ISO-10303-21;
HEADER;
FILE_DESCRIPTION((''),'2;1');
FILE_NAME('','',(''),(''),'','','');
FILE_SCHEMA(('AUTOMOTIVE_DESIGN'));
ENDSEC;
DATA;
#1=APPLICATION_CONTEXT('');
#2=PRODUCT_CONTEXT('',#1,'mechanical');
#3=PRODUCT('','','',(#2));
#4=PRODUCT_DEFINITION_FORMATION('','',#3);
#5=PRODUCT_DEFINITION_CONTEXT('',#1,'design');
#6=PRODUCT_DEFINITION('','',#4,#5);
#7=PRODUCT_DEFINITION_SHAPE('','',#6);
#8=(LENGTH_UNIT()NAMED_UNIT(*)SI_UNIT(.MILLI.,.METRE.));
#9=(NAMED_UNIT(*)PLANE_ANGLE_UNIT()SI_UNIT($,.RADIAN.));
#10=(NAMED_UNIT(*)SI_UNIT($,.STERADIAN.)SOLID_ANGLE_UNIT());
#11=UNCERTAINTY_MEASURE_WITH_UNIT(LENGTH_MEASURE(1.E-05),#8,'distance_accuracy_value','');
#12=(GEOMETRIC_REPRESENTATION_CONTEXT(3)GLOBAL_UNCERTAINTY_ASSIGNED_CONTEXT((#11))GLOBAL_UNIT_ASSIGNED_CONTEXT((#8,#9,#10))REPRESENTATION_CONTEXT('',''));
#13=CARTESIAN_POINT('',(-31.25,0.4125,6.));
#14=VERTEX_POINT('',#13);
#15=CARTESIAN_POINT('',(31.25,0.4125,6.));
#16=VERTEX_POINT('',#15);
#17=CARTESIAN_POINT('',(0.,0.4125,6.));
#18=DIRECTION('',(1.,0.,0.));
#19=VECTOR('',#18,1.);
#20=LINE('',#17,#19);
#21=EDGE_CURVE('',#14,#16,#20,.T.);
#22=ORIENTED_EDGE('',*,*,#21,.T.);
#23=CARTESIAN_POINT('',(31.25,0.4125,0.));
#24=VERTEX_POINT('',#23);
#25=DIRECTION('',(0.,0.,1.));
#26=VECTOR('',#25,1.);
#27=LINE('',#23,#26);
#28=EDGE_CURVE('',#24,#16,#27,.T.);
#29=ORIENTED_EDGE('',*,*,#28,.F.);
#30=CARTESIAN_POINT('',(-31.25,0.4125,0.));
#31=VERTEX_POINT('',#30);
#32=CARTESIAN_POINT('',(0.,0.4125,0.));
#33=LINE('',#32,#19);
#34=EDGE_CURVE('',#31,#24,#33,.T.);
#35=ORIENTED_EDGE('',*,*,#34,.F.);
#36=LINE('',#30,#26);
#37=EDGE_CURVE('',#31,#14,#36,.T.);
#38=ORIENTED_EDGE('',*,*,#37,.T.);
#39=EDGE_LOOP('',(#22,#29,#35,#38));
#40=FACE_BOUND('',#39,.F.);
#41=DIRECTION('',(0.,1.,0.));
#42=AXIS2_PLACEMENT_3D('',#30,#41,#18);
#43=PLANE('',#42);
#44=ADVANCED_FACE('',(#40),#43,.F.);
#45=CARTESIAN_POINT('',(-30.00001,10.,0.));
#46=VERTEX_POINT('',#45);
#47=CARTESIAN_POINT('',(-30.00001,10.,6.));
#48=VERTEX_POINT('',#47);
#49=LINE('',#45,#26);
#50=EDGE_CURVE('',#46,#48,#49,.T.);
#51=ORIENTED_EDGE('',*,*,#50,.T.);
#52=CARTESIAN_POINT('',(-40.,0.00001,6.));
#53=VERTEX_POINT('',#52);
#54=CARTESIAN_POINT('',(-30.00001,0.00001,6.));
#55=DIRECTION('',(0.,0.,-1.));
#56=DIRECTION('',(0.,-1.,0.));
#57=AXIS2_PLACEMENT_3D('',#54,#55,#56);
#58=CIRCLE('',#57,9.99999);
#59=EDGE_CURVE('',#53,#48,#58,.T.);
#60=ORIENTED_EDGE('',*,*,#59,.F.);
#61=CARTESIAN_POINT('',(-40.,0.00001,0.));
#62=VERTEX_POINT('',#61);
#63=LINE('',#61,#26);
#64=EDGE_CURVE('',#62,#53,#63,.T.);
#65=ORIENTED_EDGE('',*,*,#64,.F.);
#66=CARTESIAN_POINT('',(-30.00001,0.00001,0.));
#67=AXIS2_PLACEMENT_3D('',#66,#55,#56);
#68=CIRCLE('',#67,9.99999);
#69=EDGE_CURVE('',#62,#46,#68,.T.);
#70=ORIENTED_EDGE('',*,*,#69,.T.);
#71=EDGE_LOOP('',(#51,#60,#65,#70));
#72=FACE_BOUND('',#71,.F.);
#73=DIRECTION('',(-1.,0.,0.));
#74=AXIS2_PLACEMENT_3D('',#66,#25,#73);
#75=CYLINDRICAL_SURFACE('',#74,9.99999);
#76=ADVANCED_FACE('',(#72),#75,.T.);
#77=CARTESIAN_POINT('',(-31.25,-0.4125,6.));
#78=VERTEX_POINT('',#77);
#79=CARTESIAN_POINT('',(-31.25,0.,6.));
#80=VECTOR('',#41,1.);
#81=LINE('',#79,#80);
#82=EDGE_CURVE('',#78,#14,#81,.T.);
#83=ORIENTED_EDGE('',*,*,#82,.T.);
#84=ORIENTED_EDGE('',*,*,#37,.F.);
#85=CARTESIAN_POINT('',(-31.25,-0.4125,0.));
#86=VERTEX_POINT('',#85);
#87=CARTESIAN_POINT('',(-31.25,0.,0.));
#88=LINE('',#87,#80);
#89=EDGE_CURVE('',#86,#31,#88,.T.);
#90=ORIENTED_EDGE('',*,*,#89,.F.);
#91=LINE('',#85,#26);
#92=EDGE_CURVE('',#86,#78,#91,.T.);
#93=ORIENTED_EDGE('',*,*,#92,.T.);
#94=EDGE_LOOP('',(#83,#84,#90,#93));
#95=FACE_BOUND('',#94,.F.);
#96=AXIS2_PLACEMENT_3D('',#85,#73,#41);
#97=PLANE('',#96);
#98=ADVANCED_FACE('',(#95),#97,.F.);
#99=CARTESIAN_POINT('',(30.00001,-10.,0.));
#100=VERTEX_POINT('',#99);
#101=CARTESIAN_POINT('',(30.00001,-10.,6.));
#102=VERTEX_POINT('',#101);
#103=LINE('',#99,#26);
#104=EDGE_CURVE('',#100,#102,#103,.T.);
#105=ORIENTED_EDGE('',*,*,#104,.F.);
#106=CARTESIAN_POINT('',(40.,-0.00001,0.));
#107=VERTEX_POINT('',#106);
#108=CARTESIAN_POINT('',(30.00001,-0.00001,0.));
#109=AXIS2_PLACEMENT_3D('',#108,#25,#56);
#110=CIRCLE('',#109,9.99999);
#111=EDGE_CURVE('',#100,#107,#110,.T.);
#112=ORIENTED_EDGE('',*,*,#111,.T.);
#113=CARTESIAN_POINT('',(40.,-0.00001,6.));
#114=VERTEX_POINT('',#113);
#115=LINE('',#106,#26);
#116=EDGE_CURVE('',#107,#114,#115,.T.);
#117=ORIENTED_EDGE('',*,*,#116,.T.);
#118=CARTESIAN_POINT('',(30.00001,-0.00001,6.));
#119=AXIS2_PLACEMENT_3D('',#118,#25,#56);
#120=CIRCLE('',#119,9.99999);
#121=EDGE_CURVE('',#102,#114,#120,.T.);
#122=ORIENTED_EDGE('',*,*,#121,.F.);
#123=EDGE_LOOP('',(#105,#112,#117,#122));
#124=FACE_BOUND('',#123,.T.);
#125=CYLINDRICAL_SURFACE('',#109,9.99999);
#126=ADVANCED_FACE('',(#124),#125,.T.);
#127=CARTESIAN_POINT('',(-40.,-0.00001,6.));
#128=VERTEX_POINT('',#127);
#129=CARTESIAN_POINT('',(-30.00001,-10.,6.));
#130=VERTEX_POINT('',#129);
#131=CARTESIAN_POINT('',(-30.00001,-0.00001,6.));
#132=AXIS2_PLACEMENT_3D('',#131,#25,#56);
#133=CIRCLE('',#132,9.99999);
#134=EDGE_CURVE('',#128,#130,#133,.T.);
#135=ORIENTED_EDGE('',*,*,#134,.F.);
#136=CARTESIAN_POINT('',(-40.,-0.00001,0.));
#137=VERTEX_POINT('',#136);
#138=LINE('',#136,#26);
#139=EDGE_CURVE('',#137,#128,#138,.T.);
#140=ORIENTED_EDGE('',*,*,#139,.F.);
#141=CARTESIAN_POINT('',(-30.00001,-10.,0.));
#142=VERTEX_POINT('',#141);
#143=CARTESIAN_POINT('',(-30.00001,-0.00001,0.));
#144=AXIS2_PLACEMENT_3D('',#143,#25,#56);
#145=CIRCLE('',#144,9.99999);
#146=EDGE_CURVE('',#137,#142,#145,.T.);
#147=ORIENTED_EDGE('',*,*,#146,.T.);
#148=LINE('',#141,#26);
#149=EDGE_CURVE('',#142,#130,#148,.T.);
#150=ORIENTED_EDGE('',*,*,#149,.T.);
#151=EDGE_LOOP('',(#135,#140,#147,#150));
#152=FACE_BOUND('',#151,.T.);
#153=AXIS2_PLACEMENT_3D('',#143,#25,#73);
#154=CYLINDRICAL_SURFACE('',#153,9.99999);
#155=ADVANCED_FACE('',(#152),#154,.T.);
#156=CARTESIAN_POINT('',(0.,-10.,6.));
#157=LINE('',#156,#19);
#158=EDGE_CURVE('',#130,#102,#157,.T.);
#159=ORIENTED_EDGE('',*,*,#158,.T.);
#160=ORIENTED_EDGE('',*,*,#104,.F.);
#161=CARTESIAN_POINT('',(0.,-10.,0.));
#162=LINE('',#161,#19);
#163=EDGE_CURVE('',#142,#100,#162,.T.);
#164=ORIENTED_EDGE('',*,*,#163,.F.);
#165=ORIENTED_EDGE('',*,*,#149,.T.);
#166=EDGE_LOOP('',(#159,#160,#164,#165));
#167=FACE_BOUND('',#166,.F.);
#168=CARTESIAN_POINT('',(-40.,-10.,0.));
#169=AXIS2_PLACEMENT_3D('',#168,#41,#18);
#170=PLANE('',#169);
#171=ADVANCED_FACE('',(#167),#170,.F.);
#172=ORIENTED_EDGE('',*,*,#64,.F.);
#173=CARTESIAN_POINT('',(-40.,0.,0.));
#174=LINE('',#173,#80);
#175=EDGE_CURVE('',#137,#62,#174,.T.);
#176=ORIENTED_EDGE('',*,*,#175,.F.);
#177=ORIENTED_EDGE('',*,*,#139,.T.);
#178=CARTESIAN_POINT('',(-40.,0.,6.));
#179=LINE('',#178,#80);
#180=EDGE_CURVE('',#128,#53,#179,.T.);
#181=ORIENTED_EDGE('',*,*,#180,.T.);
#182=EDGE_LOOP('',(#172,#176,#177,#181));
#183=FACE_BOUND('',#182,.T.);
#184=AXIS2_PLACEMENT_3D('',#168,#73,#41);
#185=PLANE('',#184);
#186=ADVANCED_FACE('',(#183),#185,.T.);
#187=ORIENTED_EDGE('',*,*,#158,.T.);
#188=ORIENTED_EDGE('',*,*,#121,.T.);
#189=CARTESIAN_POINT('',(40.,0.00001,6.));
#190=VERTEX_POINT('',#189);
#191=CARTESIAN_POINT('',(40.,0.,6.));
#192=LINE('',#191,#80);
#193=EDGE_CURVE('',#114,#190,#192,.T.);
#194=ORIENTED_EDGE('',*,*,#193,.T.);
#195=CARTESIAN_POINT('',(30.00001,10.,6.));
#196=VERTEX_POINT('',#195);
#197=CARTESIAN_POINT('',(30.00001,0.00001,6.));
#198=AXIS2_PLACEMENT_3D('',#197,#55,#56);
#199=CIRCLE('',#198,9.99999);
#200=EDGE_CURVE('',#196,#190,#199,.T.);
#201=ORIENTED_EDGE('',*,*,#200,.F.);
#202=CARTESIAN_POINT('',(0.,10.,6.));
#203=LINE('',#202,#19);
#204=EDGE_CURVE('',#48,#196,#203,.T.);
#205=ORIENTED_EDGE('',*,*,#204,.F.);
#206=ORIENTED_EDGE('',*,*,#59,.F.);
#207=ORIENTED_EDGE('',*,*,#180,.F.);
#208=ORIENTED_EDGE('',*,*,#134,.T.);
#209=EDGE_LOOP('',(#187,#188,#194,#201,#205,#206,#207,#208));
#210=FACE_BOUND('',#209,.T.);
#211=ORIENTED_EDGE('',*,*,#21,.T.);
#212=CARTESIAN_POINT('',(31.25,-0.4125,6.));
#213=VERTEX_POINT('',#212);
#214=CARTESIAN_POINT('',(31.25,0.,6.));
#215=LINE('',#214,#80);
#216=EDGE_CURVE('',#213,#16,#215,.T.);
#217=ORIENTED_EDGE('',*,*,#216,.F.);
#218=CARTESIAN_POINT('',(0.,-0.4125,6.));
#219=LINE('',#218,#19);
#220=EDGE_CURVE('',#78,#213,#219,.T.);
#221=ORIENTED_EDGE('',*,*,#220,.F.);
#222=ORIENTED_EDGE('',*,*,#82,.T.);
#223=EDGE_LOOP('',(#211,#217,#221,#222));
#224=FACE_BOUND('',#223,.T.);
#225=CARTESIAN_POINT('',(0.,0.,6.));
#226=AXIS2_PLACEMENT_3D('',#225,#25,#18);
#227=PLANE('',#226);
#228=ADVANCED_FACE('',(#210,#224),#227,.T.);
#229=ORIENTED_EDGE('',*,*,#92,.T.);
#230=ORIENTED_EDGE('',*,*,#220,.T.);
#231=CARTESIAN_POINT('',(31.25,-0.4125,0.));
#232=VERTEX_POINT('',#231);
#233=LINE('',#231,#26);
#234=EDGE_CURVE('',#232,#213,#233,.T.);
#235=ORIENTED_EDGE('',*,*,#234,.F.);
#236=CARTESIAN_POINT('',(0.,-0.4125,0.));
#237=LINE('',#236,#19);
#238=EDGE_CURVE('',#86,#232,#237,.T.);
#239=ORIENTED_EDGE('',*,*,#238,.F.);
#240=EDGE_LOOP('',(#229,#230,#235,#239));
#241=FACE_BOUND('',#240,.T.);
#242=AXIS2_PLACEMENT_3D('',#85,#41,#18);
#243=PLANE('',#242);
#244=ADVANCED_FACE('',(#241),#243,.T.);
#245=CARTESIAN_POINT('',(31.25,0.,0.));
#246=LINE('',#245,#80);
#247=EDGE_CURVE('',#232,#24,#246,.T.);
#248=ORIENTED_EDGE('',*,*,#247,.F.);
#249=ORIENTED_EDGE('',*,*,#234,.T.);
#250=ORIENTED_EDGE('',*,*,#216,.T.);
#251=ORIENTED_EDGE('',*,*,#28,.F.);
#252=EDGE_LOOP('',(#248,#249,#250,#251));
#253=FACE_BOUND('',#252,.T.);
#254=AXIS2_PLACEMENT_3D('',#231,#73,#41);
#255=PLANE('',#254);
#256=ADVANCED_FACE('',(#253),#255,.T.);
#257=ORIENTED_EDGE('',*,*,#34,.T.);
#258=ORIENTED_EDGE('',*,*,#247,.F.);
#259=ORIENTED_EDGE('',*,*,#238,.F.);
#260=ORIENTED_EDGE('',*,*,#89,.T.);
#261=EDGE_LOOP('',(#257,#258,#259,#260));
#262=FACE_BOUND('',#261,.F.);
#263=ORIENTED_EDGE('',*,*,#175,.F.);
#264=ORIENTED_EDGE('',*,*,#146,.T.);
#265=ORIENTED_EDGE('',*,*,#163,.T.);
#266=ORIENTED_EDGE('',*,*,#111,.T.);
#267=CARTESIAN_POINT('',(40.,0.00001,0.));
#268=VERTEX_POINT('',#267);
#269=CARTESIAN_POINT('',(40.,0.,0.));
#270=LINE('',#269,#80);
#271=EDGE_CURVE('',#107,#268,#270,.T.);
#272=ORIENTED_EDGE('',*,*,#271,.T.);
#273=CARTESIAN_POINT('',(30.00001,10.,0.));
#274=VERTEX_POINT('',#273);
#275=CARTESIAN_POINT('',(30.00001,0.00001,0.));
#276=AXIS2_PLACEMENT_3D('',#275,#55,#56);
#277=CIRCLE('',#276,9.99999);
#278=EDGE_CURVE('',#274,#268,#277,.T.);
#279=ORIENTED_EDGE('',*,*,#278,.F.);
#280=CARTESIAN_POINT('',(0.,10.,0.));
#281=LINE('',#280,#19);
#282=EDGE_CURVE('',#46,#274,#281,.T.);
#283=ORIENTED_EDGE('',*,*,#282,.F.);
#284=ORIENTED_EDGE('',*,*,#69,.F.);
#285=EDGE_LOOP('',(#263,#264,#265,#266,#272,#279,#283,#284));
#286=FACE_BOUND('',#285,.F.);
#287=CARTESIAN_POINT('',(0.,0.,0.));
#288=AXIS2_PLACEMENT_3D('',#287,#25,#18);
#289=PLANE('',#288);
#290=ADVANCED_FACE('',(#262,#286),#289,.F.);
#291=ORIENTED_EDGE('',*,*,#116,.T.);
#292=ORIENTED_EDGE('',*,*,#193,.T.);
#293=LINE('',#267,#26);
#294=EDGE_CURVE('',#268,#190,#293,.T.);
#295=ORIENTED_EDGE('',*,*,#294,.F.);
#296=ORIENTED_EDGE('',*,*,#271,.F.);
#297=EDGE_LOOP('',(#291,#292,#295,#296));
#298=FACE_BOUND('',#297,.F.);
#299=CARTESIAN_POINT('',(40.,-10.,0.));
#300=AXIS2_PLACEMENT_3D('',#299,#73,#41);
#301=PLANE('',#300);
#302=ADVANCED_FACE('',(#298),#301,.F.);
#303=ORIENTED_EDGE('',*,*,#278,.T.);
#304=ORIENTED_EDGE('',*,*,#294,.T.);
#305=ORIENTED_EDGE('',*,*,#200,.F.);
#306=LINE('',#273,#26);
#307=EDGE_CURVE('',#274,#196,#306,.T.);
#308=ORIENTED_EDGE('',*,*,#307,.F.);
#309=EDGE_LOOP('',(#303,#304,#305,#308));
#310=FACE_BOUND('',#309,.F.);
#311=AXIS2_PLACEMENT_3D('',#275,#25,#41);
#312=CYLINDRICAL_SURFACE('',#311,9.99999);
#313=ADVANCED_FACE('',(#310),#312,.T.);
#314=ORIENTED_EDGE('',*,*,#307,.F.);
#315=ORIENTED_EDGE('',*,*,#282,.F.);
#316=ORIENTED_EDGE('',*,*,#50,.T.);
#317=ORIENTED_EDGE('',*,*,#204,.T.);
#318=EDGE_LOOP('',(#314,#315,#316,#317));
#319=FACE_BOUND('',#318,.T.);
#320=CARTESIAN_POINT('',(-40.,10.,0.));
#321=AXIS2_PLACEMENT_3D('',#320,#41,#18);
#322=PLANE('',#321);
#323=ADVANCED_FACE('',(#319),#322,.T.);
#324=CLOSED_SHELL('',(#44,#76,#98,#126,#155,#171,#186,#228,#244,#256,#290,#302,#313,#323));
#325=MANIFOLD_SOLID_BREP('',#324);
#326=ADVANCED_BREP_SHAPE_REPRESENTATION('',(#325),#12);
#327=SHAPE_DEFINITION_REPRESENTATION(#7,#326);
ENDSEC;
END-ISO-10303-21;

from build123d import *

# Parameters (mm, degrees)
F0_W     = 80
F0_H     = 20
F0_W_2   = 62.5
F0_H_2   = 0.825
F1_DEPTH = 6
F2_R     = 9.99999


# Not quite as in the source:
# - a fillet or chamfer is up to 0.001 mm smaller than in the source, because OpenCascade refuses the exact size


with BuildPart() as f1:
    # F0 (on Top) → F1 (new body)
    with BuildSketch(Plane.XY):
        Rectangle(F0_W, F0_H)
        Rectangle(F0_W_2, F0_H_2, mode=Mode.SUBTRACT)
    extrude(amount=F1_DEPTH)

    # F2 (radius 10 in the source; OpenCascade refuses exactly that, so slightly less here)
    f2_edges = [f1.edges().sort_by_distance(p)[0] for p in [
        (-40, 10, 3),
        (-40, -10, 3),
        (40, 10, 3),
        (40, -10, 3),
    ]]
    fillet(f2_edges, radius=F2_R)


solid = f1.part
